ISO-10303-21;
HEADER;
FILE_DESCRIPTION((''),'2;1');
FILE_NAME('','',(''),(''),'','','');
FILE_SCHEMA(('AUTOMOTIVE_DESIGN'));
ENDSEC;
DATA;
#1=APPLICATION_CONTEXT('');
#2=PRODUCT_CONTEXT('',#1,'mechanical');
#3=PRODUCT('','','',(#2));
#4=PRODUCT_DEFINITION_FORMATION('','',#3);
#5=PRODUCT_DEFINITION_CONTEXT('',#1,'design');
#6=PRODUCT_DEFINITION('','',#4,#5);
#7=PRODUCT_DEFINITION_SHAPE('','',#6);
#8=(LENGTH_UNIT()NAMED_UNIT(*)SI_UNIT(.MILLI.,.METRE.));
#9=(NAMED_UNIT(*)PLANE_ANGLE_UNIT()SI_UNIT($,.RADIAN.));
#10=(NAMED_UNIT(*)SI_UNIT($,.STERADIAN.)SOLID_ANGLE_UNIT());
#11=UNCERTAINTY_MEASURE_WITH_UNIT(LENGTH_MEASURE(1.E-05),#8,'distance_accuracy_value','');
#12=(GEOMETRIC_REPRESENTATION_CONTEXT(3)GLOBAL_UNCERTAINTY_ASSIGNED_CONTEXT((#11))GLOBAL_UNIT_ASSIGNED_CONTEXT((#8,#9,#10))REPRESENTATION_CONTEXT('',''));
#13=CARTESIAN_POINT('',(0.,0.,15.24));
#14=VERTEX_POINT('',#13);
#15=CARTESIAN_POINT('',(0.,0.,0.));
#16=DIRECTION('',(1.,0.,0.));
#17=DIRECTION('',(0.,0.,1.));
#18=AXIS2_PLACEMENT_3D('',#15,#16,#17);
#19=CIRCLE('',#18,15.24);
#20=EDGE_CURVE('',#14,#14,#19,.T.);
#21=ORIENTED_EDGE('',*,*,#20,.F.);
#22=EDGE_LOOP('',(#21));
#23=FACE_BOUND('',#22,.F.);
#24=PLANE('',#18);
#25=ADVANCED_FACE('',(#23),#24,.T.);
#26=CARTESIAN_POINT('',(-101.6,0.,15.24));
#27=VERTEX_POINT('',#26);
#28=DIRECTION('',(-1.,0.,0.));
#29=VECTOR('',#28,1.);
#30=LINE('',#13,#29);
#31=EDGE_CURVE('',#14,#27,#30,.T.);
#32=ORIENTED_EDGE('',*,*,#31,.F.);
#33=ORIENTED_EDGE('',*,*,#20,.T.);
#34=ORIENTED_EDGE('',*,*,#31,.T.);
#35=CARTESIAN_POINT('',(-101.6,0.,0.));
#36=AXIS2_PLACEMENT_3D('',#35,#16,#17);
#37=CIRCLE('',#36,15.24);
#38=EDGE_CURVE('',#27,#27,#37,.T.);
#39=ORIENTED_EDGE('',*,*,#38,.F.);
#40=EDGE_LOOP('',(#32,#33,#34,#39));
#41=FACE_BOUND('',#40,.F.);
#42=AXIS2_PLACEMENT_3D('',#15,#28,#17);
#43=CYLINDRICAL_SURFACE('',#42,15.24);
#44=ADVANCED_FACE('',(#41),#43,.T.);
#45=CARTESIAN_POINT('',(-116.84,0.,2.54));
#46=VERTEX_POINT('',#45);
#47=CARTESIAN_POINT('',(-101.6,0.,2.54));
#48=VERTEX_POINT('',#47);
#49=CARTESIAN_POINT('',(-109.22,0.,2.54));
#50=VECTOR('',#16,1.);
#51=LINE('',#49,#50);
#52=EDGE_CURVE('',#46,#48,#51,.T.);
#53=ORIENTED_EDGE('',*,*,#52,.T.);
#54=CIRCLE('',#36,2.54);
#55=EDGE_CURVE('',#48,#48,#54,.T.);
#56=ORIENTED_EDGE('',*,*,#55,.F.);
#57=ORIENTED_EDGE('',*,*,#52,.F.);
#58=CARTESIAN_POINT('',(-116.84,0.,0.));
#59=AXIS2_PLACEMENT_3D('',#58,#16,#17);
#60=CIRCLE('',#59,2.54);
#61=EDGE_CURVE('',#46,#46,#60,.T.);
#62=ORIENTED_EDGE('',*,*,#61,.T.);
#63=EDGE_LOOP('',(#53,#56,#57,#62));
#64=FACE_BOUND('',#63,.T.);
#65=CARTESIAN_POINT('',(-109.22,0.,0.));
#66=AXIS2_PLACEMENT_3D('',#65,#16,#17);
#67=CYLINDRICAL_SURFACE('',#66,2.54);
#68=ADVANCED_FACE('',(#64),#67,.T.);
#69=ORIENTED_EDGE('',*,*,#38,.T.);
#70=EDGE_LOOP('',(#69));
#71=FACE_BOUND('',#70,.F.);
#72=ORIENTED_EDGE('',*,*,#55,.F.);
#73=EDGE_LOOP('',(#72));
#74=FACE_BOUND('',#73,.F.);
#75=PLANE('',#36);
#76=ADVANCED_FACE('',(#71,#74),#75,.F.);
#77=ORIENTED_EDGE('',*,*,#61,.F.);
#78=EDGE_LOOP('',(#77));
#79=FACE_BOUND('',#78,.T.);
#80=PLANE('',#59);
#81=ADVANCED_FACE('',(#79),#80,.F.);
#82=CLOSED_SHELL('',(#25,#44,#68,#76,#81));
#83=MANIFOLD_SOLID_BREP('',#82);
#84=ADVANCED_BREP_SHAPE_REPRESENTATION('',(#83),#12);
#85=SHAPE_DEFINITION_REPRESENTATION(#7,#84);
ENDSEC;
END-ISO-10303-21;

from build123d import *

# Parameters (mm, degrees)
F0_W = 15.24
F0_H = 2.54


# Not quite as in the source:
# - a feature names something its author has since deleted; it is built from what else it names


with BuildPart() as f1:
    # F0 (on Front) → F1 (revolve)
    with BuildSketch(Plane.XZ):
        Polygon((0, 15.24), (-101.6, 15.24), (-101.6, 2.54), (-101.6, 0), (0, 0), align=None)
        with Locations((-109.22, 1.27)):
            Rectangle(F0_W, F0_H)
    revolve(axis=Axis((-50.8, 0, 0), (1, 0, 0)))


solid = f1.part
